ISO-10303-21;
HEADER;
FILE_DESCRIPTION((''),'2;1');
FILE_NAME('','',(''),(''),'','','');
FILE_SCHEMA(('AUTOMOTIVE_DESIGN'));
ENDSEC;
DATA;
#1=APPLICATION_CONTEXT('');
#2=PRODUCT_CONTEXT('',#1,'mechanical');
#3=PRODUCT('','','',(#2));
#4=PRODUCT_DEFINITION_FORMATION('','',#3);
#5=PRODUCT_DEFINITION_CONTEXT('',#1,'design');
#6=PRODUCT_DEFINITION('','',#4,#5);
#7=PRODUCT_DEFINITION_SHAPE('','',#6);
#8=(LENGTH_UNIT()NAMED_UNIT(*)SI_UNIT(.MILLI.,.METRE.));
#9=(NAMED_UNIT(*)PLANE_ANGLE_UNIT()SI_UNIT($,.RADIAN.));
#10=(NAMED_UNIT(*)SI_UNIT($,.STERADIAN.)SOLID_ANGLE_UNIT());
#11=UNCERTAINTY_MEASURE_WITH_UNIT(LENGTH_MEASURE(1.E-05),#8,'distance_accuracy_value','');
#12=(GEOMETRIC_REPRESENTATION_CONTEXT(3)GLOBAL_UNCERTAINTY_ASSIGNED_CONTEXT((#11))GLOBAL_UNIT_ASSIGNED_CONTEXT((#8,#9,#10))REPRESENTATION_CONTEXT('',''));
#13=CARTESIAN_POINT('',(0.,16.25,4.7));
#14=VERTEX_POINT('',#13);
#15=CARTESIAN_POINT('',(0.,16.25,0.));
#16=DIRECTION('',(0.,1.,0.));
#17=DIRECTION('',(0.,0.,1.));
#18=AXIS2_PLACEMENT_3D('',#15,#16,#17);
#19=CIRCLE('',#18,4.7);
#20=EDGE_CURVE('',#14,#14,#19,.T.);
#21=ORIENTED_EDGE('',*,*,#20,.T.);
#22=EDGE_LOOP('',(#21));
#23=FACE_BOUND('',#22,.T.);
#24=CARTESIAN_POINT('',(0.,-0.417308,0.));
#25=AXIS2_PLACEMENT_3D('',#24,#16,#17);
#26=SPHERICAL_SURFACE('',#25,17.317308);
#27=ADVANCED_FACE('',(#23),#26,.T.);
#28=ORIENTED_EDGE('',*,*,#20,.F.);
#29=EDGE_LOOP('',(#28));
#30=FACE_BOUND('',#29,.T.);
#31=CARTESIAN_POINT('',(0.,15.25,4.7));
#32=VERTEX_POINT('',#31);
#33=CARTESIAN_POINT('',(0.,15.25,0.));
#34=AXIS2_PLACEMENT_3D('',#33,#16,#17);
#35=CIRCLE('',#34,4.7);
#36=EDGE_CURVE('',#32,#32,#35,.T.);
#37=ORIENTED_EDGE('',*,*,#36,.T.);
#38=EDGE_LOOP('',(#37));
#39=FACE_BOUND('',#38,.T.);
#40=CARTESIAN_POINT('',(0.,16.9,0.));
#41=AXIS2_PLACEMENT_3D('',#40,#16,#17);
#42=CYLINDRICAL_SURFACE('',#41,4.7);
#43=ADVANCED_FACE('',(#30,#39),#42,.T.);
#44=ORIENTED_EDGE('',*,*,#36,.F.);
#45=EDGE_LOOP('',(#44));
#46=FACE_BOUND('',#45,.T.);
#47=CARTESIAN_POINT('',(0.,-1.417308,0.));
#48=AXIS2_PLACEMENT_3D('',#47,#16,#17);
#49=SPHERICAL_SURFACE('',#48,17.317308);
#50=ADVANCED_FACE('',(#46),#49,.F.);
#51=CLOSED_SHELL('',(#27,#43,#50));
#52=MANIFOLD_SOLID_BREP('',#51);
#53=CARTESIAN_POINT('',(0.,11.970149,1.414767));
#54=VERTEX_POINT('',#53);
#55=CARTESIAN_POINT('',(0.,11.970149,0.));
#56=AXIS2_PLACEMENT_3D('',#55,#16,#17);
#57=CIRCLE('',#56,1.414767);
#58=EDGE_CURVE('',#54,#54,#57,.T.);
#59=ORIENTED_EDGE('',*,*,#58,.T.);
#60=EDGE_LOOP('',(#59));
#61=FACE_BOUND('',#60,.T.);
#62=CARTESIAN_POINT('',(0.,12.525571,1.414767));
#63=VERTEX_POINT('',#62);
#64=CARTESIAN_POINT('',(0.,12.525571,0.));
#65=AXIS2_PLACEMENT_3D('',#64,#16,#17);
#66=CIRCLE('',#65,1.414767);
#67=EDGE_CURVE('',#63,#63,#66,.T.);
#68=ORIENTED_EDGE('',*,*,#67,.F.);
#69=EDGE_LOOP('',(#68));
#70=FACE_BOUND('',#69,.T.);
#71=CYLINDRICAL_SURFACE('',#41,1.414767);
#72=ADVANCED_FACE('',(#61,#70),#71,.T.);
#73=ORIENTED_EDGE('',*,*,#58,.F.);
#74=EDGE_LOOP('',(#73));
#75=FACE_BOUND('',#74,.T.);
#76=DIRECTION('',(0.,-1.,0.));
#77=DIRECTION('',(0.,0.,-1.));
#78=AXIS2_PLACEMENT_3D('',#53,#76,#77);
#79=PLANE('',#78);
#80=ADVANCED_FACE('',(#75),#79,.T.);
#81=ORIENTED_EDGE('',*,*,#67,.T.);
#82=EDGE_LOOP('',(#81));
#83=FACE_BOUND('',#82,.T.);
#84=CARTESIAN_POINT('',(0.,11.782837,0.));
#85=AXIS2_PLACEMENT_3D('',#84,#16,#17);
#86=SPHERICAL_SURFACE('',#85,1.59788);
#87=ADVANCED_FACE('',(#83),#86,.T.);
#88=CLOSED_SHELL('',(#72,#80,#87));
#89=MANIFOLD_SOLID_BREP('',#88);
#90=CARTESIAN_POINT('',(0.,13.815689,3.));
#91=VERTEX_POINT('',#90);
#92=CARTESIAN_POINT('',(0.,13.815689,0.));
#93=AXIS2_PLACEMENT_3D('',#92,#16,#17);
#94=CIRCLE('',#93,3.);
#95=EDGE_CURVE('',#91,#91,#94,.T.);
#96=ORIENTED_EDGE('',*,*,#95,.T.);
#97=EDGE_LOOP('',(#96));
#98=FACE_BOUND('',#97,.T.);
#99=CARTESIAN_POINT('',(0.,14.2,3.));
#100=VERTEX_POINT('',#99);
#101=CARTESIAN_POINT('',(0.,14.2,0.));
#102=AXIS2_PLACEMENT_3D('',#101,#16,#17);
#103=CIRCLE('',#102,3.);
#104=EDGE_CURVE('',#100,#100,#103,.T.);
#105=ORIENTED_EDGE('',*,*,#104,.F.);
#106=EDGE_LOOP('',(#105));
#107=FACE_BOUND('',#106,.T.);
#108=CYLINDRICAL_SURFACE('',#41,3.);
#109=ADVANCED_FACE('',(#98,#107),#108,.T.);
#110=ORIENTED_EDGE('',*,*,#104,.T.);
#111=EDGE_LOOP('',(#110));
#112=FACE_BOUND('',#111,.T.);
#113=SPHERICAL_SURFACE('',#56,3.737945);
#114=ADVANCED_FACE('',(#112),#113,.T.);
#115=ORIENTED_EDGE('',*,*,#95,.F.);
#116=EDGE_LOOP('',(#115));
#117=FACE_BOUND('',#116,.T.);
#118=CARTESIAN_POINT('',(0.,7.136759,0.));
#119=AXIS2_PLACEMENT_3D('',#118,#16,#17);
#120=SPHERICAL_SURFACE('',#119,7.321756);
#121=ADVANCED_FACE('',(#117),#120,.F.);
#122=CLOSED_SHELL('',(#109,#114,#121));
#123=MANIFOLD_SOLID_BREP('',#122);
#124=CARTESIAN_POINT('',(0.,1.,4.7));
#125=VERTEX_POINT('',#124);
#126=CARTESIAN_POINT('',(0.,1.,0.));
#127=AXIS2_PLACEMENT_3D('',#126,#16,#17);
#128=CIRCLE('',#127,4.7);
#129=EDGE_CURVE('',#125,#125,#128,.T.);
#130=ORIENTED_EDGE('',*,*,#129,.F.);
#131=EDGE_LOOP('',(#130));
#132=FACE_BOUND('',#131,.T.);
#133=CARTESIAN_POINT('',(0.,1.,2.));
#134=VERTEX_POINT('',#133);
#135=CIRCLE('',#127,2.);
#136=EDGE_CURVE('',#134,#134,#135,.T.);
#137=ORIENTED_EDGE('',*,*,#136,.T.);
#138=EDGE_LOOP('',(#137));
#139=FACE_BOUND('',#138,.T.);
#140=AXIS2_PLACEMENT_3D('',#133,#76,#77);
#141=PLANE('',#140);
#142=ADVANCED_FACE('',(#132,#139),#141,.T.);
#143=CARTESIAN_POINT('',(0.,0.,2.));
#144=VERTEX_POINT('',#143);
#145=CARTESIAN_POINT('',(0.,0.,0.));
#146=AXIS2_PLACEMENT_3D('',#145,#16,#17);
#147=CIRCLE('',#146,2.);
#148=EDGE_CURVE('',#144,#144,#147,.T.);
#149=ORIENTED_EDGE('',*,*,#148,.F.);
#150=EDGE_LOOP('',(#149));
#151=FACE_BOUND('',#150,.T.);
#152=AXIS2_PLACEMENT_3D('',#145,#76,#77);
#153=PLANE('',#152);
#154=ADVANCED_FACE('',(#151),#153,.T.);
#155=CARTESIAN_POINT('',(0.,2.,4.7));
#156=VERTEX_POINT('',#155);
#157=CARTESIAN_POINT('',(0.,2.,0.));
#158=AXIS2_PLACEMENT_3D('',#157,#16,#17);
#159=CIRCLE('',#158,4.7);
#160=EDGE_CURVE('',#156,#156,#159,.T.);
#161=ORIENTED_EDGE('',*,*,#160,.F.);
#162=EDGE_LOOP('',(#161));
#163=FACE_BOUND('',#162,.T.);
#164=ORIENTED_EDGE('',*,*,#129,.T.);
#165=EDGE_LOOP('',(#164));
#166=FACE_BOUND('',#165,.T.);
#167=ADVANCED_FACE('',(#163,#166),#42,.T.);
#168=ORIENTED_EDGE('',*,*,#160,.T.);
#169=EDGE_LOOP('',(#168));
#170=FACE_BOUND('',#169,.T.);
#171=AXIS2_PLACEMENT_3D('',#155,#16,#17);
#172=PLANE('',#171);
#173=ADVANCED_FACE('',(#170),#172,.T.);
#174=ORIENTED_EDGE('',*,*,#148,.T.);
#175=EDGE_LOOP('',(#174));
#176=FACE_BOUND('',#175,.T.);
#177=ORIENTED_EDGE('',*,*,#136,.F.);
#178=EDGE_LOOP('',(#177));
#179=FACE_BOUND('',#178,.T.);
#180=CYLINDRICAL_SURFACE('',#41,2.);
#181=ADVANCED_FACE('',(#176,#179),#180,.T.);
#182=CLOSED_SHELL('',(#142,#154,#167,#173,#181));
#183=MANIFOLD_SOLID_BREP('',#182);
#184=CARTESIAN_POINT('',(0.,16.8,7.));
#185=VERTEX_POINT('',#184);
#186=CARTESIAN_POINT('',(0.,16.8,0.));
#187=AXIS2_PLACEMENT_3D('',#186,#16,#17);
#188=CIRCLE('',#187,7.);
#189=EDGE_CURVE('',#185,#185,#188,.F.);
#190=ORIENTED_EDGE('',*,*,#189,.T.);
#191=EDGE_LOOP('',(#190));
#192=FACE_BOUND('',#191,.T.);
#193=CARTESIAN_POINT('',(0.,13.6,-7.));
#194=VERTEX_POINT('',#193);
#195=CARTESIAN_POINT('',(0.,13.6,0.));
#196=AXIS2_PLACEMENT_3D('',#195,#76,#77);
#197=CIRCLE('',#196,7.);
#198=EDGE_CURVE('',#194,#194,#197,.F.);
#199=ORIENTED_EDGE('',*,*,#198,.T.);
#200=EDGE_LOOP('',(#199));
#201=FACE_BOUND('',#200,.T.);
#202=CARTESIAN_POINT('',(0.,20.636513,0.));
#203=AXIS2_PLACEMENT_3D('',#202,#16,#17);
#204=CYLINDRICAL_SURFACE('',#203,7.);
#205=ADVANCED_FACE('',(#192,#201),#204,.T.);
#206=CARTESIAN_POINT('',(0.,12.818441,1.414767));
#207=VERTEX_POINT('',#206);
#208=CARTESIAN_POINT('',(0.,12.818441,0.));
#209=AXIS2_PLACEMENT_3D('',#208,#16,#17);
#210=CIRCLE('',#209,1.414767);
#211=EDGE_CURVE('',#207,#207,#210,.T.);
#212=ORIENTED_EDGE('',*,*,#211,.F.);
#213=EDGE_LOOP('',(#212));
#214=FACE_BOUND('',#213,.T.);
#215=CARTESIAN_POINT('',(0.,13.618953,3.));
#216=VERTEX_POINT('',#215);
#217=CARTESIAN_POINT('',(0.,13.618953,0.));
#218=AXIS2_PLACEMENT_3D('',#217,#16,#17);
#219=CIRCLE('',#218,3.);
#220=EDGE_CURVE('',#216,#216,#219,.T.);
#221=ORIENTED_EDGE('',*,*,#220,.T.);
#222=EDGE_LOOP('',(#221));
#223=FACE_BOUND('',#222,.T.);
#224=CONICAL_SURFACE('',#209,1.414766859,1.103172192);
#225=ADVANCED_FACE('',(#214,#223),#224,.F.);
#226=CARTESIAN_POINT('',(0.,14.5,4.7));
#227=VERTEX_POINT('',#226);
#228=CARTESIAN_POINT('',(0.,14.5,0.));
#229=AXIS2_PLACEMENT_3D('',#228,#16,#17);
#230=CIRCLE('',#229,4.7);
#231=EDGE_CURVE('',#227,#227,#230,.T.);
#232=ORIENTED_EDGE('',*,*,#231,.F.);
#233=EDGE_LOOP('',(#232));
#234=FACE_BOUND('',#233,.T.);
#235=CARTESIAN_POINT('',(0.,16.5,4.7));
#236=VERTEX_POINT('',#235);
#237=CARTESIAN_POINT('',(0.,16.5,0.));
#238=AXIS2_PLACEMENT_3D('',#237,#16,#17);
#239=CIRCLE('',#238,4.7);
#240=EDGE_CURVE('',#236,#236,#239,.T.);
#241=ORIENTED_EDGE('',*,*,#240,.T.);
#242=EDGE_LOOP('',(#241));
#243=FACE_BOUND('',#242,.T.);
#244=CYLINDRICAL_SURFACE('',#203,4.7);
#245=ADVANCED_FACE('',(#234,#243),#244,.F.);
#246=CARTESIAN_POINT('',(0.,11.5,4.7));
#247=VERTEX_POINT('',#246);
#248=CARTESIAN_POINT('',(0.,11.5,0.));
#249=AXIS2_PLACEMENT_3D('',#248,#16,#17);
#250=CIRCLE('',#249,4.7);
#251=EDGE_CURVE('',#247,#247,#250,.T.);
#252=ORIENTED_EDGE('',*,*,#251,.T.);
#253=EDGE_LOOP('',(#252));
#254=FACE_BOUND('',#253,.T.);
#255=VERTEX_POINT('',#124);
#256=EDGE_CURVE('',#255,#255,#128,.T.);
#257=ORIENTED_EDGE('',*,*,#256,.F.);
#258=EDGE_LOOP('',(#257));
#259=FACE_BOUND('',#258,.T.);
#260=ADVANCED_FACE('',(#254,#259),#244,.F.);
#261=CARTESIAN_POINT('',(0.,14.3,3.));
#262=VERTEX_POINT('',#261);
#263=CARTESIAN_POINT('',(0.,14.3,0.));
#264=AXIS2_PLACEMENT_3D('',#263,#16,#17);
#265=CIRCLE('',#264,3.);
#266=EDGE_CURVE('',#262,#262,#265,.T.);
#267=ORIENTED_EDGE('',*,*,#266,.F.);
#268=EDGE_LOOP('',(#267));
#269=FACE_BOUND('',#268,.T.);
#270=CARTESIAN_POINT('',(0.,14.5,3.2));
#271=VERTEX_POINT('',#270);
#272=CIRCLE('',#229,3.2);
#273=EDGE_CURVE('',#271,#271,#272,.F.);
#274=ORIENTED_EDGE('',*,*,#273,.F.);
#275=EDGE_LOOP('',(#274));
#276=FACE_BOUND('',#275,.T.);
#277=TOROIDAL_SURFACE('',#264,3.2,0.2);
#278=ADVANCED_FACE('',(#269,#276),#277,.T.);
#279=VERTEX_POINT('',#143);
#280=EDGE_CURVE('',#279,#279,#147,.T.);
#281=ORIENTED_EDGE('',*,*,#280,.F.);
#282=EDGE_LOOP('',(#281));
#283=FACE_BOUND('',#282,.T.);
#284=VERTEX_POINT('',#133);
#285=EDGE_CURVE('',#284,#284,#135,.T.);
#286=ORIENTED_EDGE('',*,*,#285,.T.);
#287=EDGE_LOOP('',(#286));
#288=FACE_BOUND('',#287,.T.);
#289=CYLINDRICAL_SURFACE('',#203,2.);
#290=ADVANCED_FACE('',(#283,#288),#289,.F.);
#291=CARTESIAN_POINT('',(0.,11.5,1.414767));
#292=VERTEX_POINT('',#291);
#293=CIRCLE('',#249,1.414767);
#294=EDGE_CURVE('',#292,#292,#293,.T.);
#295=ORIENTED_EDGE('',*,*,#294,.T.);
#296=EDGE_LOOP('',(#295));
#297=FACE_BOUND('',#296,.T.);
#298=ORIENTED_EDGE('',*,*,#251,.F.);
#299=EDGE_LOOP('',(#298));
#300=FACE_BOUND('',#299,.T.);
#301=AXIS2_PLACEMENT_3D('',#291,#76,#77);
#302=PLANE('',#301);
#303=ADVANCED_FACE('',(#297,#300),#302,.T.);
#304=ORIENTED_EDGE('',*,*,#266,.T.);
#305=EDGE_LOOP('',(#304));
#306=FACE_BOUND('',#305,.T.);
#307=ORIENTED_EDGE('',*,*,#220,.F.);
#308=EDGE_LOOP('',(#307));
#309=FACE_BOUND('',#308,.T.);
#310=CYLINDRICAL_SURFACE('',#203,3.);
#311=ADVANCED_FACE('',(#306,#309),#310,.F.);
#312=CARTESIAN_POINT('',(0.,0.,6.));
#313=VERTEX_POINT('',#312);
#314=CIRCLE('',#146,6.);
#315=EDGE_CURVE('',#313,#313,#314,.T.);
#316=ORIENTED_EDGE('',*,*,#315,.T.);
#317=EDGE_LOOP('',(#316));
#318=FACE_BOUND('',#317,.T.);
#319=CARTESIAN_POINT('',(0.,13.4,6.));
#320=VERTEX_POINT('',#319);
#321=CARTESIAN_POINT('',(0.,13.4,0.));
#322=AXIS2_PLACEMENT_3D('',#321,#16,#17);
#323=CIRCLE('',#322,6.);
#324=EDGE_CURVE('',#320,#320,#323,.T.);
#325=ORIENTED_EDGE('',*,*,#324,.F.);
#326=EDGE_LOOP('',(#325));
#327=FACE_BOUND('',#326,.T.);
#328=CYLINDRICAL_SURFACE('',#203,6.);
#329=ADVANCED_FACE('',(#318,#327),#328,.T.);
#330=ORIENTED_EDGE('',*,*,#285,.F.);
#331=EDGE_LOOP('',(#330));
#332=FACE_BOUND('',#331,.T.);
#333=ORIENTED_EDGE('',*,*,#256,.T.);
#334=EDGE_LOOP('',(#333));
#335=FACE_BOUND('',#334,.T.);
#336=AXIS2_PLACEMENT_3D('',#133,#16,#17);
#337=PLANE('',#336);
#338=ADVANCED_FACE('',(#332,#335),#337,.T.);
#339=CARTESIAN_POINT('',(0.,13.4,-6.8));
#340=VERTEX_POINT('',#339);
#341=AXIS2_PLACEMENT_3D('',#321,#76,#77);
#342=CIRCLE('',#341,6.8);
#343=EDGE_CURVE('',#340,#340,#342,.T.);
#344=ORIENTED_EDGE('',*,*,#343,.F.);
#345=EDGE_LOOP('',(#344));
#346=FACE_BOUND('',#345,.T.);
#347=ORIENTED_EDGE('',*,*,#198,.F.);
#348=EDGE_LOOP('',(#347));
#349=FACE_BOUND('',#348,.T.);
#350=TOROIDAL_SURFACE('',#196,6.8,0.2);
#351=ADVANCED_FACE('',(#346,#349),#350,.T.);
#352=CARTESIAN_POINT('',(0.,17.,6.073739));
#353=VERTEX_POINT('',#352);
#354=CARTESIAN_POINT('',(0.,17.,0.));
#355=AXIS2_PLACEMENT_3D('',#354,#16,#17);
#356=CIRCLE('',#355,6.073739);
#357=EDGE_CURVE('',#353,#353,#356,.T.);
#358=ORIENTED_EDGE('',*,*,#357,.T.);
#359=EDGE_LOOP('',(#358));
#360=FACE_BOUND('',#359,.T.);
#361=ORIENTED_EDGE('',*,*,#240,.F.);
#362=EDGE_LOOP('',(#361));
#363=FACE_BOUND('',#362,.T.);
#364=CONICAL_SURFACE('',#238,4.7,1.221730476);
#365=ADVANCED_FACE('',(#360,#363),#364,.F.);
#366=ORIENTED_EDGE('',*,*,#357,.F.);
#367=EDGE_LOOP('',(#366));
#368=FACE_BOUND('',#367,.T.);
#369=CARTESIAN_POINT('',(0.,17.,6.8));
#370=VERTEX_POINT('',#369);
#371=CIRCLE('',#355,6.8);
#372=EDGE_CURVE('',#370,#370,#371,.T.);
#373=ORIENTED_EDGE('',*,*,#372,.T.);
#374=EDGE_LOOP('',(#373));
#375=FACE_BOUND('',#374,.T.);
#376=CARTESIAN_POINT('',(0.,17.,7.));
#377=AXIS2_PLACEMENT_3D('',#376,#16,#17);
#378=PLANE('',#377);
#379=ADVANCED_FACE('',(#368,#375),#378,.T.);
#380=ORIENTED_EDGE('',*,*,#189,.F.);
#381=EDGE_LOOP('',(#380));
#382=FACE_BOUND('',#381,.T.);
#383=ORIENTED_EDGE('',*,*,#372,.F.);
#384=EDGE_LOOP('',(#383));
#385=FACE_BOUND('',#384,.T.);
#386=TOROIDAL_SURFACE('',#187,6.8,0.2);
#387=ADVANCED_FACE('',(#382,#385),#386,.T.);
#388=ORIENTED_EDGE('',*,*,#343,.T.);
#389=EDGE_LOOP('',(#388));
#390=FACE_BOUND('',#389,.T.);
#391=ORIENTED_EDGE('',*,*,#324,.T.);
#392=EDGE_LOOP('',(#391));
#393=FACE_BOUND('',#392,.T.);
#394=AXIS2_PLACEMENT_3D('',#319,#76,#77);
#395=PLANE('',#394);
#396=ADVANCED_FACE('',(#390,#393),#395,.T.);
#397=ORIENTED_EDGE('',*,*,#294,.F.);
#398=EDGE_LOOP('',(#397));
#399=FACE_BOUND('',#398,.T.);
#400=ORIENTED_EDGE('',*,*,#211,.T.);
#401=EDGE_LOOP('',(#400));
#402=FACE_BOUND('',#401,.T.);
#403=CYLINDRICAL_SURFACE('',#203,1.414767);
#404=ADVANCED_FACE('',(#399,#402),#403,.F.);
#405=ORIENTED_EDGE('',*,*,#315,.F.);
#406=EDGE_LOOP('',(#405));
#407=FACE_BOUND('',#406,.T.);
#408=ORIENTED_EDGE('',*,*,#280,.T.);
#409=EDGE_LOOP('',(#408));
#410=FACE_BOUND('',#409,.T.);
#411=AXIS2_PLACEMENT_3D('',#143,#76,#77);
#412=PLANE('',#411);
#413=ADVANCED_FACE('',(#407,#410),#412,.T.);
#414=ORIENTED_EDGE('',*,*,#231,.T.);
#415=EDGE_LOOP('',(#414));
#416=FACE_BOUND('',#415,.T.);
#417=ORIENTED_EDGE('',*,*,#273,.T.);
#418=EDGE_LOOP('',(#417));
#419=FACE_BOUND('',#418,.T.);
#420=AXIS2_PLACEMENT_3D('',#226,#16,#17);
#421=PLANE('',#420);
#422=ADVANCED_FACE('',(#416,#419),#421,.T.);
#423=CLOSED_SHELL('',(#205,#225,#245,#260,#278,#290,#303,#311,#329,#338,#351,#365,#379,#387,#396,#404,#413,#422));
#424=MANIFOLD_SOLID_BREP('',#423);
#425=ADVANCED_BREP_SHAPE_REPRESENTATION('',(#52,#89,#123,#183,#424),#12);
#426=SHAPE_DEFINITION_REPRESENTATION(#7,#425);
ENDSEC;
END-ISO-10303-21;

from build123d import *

# Parameters (mm, degrees)
FILLET1_R = 0.2
FILLET2_R = 0.2


with BuildPart() as part:
    # Sketch2 → Revolve1 (revolve)
    with BuildSketch(Plane(origin=(0, 0, 0), x_dir=(0, 0, -1), z_dir=(1, 0, 0))):
        Polygon((-6.07373871, 17), (-4.7, 16.5), (-4.7, 14.5), (-3, 14.5), (-3, 13.61895335), (-1.414766859, 12.818441389), (-1.414766859, 11.5), (-4.7, 11.5), (-4.7, 1), (-2, 1), (-2, 0), (-6, 0), (-6, 13.4), (-7, 13.4), (-7, 17), align=None)
    revolve(axis=Axis((0, 20.636512962, 0), (0, -1, 0)))

    # Fillet1
    fillet1_edges = [part.edges().sort_by_distance(p)[0] for p in [
        (0, 14.5, -3),
    ]]
    fillet(fillet1_edges, radius=FILLET1_R)

    # Fillet2
    fillet2_edges = [part.edges().sort_by_distance(p)[0] for p in [
        (0, 13.4, -7),
        (0, 17, -7),
    ]]
    fillet(fillet2_edges, radius=FILLET2_R)


with BuildPart() as body_2:
    # Sketch3 → Revolve2 (revolve)
    with BuildSketch(Plane(origin=(0, 0, 0), x_dir=(0, 0, -1), z_dir=(1, 0, 0))):
        with BuildLine():
            Line((0, 16.9), (0, 15.9))
            ThreePointArc((0, 15.9), (-2.372366961, 15.736730337), (-4.7, 15.25))
            Line((-4.7, 15.25), (-4.7, 16.25))
            ThreePointArc((-4.7, 16.25), (-2.372366961, 16.736730337), (0, 16.9))
        make_face()
        Polygon((-2, 0), (-2, 1), (-4.7, 1), (-4.7, 2), (0, 2), (0, 0), align=None)
        with BuildLine():
            Line((-3, 14.2), (-3, 13.815689024))
            ThreePointArc((-3, 13.815689024), (-1.534048958, 14.29600477), (0, 14.458514676))
            Line((0, 14.458514676), (0, 15.708094323))
            ThreePointArc((0, 15.708094323), (-1.678864831, 15.309856799), (-3, 14.2))
        make_face()
        with BuildLine():
            Line((-1.414766859, 12.525571159), (-1.414766859, 11.970148919))
            Line((-1.414766859, 11.970148919), (0, 11.970148919))
            Line((0, 11.970148919), (0, 13.380716758))
            ThreePointArc((0, 13.380716758), (-0.82656507, 13.150320013), (-1.414766859, 12.525571159))
        make_face()
    revolve(axis=Axis((0, 16.9, 0), (0, -1, 0)))


solid = Compound([part.part, body_2.part])
